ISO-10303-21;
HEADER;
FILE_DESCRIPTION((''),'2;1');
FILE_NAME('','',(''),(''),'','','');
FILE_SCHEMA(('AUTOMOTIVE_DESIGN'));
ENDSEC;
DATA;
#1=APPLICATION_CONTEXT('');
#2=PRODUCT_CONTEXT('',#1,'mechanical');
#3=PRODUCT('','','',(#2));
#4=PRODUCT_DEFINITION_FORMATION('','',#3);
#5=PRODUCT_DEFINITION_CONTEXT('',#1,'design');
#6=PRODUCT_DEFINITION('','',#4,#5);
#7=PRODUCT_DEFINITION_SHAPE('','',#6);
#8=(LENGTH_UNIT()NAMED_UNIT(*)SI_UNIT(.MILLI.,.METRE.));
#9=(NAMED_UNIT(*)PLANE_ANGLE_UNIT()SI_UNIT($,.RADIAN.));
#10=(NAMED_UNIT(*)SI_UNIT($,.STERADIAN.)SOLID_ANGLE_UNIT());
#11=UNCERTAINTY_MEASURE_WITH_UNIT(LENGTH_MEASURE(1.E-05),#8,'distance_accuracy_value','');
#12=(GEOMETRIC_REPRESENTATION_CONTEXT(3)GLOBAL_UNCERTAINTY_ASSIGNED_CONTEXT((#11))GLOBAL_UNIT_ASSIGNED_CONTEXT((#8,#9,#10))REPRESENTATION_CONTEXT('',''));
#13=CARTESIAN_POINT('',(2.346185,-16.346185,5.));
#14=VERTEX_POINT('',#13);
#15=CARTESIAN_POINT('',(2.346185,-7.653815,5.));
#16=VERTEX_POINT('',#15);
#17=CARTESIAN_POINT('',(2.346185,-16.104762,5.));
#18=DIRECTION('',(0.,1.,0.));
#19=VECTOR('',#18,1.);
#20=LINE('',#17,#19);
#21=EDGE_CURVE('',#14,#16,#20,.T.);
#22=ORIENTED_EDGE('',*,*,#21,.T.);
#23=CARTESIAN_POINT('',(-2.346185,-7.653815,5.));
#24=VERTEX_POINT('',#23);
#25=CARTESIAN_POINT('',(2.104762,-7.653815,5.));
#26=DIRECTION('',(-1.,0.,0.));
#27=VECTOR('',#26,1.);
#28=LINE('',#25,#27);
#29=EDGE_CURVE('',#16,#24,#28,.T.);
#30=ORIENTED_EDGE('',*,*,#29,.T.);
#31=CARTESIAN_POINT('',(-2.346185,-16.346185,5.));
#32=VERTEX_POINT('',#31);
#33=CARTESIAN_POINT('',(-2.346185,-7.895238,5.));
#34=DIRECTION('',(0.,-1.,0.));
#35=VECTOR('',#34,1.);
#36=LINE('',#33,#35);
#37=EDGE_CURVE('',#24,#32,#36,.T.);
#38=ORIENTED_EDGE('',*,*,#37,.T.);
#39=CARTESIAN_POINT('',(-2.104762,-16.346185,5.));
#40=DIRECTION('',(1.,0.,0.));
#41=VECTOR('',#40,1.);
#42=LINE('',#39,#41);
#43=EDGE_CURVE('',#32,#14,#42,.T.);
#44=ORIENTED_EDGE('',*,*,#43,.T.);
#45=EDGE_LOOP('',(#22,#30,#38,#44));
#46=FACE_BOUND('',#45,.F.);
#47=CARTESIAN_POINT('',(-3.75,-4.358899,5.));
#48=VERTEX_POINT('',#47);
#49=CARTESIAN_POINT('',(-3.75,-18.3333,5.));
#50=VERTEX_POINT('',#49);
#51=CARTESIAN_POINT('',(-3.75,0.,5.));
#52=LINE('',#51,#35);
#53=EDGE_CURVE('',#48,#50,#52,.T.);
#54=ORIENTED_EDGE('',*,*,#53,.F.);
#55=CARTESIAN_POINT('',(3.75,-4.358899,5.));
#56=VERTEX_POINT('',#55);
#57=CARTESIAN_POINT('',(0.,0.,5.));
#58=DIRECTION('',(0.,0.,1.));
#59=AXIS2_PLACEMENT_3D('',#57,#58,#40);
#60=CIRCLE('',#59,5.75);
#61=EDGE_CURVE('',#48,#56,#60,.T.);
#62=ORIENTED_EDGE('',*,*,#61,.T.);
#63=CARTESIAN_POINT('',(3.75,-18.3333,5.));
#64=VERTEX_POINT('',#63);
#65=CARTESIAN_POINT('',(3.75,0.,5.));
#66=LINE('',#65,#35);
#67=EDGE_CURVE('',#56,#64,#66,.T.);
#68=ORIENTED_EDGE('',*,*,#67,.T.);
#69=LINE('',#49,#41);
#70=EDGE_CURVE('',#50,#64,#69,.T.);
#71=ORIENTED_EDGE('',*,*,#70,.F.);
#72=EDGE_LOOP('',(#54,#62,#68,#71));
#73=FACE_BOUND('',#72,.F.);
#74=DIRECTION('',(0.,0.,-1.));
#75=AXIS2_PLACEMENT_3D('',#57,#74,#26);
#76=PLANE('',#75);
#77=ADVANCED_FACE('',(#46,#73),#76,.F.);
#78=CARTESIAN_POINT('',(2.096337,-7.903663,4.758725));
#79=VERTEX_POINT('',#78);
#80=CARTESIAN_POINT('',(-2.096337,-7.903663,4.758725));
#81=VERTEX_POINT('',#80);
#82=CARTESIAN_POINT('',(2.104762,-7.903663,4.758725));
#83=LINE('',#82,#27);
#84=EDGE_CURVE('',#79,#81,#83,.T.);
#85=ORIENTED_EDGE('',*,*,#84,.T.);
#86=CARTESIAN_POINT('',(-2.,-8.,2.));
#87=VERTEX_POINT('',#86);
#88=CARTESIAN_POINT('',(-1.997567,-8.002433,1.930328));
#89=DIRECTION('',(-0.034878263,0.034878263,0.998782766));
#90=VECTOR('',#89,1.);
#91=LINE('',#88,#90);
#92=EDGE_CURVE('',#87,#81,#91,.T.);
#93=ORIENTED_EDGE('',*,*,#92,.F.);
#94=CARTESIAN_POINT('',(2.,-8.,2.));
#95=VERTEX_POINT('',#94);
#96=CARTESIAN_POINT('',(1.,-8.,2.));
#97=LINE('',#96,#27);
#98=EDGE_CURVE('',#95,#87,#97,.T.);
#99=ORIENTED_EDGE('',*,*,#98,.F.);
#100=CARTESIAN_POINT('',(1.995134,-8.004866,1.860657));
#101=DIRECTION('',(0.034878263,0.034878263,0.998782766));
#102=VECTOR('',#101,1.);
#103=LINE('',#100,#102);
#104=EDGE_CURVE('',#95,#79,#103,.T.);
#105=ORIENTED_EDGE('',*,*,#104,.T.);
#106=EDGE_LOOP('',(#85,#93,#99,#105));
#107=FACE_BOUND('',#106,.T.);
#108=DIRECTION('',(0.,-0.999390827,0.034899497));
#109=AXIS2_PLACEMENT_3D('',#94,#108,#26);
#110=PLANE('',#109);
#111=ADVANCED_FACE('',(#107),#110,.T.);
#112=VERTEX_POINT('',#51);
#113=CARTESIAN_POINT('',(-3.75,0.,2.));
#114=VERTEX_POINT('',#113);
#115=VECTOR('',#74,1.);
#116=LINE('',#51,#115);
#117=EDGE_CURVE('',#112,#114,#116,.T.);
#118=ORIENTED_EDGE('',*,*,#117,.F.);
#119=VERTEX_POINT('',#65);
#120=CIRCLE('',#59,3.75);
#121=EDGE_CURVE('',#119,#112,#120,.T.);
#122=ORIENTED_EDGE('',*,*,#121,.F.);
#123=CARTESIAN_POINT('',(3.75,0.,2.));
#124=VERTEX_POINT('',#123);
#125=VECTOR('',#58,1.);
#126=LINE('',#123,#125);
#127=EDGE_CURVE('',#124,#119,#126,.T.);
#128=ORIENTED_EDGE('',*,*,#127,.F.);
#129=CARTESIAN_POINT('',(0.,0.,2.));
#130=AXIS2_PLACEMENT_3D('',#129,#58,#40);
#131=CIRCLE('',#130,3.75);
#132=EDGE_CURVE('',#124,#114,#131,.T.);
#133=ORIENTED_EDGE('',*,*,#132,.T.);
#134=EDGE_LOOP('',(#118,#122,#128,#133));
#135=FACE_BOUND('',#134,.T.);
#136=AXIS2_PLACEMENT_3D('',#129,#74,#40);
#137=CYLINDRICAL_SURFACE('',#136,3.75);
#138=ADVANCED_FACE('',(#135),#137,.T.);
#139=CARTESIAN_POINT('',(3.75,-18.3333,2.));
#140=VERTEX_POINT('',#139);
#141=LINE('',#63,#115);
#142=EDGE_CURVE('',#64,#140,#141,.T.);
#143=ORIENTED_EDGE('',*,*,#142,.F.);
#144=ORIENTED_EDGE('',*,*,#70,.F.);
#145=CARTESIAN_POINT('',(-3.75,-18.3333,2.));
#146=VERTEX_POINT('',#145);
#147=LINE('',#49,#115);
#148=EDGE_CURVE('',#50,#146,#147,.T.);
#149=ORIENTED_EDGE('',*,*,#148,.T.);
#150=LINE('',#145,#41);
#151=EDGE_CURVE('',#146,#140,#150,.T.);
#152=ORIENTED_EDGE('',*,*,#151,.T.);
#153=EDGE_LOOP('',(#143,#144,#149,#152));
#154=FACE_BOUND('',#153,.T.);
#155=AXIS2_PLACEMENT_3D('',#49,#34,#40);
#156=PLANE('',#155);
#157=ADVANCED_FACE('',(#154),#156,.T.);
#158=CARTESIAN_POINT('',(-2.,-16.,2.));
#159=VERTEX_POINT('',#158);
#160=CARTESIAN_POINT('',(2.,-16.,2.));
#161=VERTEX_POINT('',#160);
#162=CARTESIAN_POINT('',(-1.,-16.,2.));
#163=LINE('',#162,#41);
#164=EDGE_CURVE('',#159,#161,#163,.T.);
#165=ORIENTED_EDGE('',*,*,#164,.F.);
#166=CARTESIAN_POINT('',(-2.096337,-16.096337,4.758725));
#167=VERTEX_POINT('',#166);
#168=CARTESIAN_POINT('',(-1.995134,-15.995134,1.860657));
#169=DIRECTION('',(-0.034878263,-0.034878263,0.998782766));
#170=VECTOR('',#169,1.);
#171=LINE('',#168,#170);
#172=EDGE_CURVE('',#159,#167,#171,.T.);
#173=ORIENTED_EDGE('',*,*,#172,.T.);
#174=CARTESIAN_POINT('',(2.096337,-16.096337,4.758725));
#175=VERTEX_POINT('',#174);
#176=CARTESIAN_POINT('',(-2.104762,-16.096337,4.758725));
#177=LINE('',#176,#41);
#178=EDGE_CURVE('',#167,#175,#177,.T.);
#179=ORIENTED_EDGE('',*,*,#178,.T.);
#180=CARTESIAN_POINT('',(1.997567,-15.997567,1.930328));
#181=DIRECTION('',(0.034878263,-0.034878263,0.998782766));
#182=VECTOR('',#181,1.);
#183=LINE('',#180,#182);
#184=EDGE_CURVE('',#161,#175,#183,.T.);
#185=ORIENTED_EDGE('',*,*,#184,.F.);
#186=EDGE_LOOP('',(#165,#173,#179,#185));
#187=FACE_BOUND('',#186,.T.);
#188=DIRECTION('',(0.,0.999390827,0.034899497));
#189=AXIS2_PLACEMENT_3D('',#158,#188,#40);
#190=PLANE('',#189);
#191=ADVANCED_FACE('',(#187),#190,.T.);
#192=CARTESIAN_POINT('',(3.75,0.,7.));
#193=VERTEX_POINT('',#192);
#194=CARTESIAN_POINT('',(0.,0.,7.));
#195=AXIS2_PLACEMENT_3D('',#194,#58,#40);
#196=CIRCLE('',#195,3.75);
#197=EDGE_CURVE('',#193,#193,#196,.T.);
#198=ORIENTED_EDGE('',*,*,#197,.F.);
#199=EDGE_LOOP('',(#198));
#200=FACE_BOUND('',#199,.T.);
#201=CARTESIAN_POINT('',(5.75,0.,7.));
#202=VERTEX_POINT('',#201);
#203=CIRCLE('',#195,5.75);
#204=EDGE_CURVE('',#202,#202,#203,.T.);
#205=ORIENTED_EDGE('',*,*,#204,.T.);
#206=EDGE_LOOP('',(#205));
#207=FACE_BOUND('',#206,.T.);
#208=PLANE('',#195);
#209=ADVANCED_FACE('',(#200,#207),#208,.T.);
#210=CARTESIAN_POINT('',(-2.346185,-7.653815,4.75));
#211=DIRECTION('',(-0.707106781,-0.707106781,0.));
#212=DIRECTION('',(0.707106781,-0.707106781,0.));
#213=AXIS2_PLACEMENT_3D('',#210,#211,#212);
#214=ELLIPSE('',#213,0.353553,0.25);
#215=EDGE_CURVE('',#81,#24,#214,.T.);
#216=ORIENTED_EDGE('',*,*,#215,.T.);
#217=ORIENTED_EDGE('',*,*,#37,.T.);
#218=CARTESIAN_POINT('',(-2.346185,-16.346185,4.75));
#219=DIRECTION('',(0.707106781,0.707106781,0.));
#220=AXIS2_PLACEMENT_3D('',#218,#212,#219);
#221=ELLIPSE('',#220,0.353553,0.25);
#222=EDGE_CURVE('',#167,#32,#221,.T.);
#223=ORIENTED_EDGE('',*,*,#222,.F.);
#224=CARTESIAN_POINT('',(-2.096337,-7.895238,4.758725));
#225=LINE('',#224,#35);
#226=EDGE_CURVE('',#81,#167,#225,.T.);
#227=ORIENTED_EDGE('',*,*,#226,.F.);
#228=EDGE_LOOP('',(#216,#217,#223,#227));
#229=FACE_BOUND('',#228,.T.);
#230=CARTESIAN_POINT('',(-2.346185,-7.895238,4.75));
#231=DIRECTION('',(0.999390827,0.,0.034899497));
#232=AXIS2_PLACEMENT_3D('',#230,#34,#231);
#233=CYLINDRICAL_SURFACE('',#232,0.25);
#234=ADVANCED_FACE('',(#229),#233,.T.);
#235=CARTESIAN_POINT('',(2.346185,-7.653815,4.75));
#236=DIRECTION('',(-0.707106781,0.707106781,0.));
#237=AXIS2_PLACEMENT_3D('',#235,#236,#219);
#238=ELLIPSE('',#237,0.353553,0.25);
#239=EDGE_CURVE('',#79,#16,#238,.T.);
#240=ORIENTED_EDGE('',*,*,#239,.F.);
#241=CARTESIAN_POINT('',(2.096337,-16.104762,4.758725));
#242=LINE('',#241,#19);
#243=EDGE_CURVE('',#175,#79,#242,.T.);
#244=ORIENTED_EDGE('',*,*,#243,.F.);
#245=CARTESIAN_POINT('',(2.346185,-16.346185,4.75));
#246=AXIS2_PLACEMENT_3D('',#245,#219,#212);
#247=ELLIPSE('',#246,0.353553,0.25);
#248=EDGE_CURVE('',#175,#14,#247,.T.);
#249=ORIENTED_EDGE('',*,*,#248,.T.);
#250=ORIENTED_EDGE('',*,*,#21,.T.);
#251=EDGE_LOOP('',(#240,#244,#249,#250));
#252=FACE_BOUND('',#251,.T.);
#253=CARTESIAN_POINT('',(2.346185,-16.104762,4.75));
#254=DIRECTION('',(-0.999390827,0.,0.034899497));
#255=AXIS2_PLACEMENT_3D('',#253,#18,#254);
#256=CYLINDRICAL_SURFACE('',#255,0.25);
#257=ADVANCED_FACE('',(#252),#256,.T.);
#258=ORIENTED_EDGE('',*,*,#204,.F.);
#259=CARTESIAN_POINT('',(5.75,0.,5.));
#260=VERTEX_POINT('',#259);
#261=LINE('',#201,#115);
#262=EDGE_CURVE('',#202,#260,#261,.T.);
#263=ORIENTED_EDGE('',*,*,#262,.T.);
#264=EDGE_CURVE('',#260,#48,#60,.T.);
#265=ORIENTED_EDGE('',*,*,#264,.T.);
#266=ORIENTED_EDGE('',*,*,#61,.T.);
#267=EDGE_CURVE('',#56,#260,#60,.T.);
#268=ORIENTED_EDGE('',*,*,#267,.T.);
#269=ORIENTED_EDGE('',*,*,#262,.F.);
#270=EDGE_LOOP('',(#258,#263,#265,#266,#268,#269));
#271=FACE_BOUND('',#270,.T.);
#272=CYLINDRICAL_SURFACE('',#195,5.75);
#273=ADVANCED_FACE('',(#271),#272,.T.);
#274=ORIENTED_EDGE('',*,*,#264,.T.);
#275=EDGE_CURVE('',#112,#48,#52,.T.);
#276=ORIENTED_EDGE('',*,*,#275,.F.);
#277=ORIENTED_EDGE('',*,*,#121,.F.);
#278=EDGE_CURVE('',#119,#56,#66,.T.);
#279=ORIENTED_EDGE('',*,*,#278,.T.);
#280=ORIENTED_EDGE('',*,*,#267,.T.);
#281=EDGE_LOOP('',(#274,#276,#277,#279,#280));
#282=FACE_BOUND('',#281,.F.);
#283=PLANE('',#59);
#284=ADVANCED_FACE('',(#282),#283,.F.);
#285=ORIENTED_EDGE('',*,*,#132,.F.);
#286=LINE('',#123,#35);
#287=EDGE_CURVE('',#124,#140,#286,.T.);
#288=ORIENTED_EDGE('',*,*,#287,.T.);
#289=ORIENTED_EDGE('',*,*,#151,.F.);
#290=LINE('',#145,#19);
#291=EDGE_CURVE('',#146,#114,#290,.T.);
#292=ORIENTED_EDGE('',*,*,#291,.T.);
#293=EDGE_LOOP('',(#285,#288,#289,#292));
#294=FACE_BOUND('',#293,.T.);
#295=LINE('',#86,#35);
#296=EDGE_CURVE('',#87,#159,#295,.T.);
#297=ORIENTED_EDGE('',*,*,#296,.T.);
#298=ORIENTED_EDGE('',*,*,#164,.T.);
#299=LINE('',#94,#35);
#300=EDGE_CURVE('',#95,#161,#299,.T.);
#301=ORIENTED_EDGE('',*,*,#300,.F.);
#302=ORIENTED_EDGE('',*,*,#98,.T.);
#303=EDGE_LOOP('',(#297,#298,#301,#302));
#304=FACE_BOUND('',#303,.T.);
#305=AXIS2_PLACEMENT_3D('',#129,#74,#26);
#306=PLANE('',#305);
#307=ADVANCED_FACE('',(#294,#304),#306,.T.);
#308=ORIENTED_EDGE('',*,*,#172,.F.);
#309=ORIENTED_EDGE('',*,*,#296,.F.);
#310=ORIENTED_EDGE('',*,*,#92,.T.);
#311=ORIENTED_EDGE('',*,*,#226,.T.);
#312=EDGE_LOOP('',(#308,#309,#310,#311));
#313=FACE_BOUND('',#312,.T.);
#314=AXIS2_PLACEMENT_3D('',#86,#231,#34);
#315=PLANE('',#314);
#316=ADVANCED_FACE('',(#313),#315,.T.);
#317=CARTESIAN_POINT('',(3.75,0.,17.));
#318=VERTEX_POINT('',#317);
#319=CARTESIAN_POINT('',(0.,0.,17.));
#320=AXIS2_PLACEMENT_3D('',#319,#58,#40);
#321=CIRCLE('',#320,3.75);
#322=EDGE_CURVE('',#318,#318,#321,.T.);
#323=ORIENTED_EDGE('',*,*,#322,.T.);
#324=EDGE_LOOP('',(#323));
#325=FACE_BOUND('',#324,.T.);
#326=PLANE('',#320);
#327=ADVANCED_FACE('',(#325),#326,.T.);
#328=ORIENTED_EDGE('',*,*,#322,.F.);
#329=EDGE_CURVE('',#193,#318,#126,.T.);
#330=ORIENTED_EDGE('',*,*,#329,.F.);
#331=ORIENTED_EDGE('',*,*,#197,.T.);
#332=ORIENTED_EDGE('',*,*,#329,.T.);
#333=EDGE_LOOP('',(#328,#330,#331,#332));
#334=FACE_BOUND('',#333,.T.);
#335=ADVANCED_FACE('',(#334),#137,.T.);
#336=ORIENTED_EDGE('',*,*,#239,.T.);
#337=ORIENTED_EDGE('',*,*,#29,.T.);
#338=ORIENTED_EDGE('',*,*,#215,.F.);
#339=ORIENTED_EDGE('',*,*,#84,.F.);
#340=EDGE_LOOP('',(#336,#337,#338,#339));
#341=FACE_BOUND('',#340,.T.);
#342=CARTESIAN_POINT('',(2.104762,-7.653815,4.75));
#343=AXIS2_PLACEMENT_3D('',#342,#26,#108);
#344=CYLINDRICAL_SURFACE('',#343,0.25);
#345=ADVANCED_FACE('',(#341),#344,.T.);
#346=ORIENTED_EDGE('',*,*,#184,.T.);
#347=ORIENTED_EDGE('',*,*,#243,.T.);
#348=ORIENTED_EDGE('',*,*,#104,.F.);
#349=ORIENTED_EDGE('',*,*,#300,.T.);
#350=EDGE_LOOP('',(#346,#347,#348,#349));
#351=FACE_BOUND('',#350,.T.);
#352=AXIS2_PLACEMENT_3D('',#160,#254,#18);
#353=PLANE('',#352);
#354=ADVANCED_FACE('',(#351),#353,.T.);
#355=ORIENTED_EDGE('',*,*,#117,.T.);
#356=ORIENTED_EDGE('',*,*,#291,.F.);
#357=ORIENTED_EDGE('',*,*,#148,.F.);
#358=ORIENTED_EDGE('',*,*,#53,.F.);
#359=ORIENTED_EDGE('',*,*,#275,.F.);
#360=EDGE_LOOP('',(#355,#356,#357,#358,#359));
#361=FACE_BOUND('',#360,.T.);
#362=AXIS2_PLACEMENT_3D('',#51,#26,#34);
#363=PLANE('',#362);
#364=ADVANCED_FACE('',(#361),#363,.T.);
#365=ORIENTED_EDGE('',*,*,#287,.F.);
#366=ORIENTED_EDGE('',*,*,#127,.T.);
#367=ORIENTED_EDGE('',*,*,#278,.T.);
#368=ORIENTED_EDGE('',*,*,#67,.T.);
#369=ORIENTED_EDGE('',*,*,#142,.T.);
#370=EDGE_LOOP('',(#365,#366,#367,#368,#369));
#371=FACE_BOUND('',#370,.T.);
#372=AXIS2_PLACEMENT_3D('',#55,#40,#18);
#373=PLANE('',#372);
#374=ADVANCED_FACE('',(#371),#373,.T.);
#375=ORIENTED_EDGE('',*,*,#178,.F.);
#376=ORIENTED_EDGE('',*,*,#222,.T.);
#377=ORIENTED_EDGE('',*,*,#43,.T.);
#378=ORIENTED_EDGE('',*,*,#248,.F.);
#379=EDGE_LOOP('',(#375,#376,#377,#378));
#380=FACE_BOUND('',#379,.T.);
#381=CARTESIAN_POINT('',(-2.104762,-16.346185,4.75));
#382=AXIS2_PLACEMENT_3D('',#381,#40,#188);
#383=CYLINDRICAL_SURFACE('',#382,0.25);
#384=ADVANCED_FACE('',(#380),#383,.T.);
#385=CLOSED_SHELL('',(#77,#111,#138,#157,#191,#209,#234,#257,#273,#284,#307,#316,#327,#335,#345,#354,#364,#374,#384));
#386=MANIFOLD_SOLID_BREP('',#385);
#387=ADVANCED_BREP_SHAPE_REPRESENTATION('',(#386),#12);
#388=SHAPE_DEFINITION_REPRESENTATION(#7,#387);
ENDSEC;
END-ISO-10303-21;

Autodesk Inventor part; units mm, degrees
ref_plane "YZ Plane" through (0, 0, 0) normal (1, 0, 0) x (0, 1, 0)
sketch "Sketch1" plane through (0, 0, 0) normal (0, 0, 1) x (1, 0, 0)
  circle A0 centre (0, 0) radius 10
  dimension "d0" = 20
extrude "Extrusion1" add sketch "Sketch1" along normal blind 2
sketch "Sketch2" plane through (0, 0, 2) normal (0, 0, 1) x (1, 0, 0)
  circle A0 centre (0, 0) radius 3.75
  dimension "d3" = 7.5
extrude "Extrusion2" add sketch "Sketch2" along normal blind 15
ref_plane "Work Plane2" through (0, 0, 7) normal (0, 0, 1) x (1, 0, 0)
sketch "Sketch7" plane through (0, 0, 7) normal (0, 0, 1) x (1, 0, 0)
  circle A0 centre (0, 0) radius 3.75 projected
  circle A1 centre (0, 0) radius 5.75
  dimension "d27" = 2
extrude "Extrusion7" add sketch "Sketch7" against normal blind 2
sketch "Sketch8" plane through (0, 0, 5) normal (0, 0, -1) x (-1, 0, 0)
  circle A0 centre (0, 0) radius 5.75 projected
  circle A1 centre (0, 0) radius 3.75 projected
  circle A2 centre (0, 0) radius 5.75 construction
  line L0 (5.75, 0) -> (-5.75, 0) construction
  line L1 (-3.75, 0) -> (3.75, 0)
  line L2 (3.75, 0) -> (3.75, -18.3333)
  line L3 (3.75, -18.3333) -> (-3.75, -18.3333)
  line L4 (-3.75, -18.3333) -> (-3.75, 0)
  dimension "d31" = 18.3333
extrude "Extrusion8" add sketch "Sketch8" along normal blind 3 contours L4 A1 L2 A0 | A0 L2 L3 L4 picked at (2.8343, -4.1874)
sketch "Sketch9" plane through (0, 0, 2) normal (0, 0, -1) x (-1, 0, 0)
  arc A0 (-3.75, -4.3589) -> (3.75, -4.3589) centre (0, 0) ccw projected
  line L0 (3.75, -18.3333) -> (3.75, -4.3589) projected
  line L1 (-3.75, -18.3333) -> (3.75, -18.3333) projected
  line L2 (-3.75, -4.3589) -> (-3.75, -18.3333) projected
  line L3 (-2, -8) -> (2, -8)
  line L4 (2, -8) -> (2, -16)
  line L5 (2, -16) -> (-2, -16)
  line L6 (-2, -16) -> (-2, -8)
  dimension "d34" = 2
  dimension "d35" = 4
  dimension "d36" = 8
  dimension "d37" = 8
extrude "Extrusion9" cut sketch "Sketch9" against normal up to surface (3 mm away) draft 2 contours L3 L4 L5 L6
fillet "Fillet2" radius 0.25 4 edges at (0, -16.1048, 5) (2.1048, -12, 5) (-2.1048, -12, 5) (0, -7.8952, 5)
ref_plane "Work Plane3" through (0, 0, 2) normal (0, 0, -1) x (-1, 0, 0)
split "Split1" plane through (0, 0, 2) removes the side toward (0, 0, -1)
equation "\"d1\" = IG_gearThickness"
equation "\"d3\" = IG_shaftDiameter"
equation "\"d4\" = IG_shaftLength"
equation "\"Wheel_Related_W_\" = 0"
equation "\"W_innerDepth\" = 4"
equation "\"W_wallThickness\" = 2"
equation "\"W_holesClearance\" = 0.3"
equation "\"W_outerGearHoleDiameter\" = 5.3"
equation "\"W_innerGearHoleDiameter\" = 10.1"
equation "\"TempSpotReserved7\" = 0"
equation "\"TempSpotReserved8\" = 0"
equation "\"TempSpotReserved9\" = 0"
equation "\"TempSpotReserved10\" = 0"
equation "\"TempSpotReserved11\" = 0"
equation "\"TempSpotReserved12\" = 0"
equation "\"TempSpotReserved13\" = 0"
equation "\"TempSpotReserved14\" = 0"
equation "\"TempSpotReserved15\" = 0"
equation "\"TempSpotReserved16\" = 0"
equation "\"TempSpotReserved17\" = 0"
equation "\"TempSpotReserved18\" = 0"
equation "\"TempSpotReserved19\" = 0"
equation "\"TempSpotReserved20\" = 0"
equation "\"Inner_Gear_Related_IG_\" = 0"
equation "\"IG_shaftDiameter\" = 7.5"
equation "\"IG_shaftLength\" = 15"
equation "\"IG_gearThickness\" = 2"
equation "\"TempSpotReserved25\" = 0"
equation "\"TempSpotReserved26\" = 0"
equation "\"TempSpotReserved27\" = 0"
equation "\"TempSpotReserved28\" = 0"
equation "\"TempSpotReserved29\" = 0"
equation "\"TempSpotReserved30\" = 0"
equation "\"TempSpotReserved31\" = 0"
equation "\"TempSpotReserved32\" = 0"
equation "\"TempSpotReserved33\" = 0"
equation "\"TempSpotReserved34\" = 0"
equation "\"TempSpotReserved35\" = 0"
equation "\"TempSpotReserved36\" = 0"
equation "\"TempSpotReserved37\" = 0"
equation "\"TempSpotReserved38\" = 0"
equation "\"TempSpotReserved39\" = 0"
equation "\"TempSpotReserved40\" = 0"
equation "\"Outer_Gear_Related_OG_\" = 0"
equation "\"OG_distanceFromCenter\" = 23.33333"
equation "\"OG_shaftDiameter\" = 5"
equation "\"OG_gearDiameter\" = 26.66667"
equation "\"OG_shaftLength\" = 7"
equation "\"OG_gearThickness\" = 2"
equation "\"TempSpotReserved47\" = 0"
equation "\"TempSpotReserved48\" = 0"
equation "\"TempSpotReserved49\" = 0"
equation "\"TempSpotReserved50\" = 0"
equation "\"TempSpotReserved51\" = 0"
equation "\"TempSpotReserved52\" = 0"
equation "\"TempSpotReserved53\" = 0"
equation "\"TempSpotReserved54\" = 0"
equation "\"TempSpotReserved55\" = 0"
equation "\"TempSpotReserved56\" = 0"
equation "\"TempSpotReserved57\" = 0"
equation "\"TempSpotReserved58\" = 0"
equation "\"TempSpotReserved59\" = 0"
equation "\"TempSpotReserved60\" = 0"
equation "\"Leg_Extensions_Related_LE_\" = 0"
equation "\"LE_baseDiameter\" = 5"
equation "\"LE_maxLength\" = 24.6522"
equation "\"LE_thickness\" = 2.5"
equation "\"IG_ratioToOuterGear\" = 0.75"
equation "\"B_bearingThickness\" = 1"
equation "\"TempSpotReserved43\" = 0"
equation "\"TempSpotReserved45\" = 0"
equation "\"Thisisatest\" = 25.4"
equation "\"TempSpotReserved46\" = 0"
equation "\"TempSpotReserved44\" = 0"
equation "\"LE_offsetAboveOuterGear\" = 0"
equation "\"Bearing_Related_B_\" = 0"
equation "\"TempSpotReserved42\" = 0"
equation "\"OG_skirtOffset\" = 1"
equation "\"OG_skirtThickness\" = 1"
equation "\"IG_skirtThickness\" = 2"
equation "\"IG_extentionLength\" = 18.33333"
equation "\"IG_extentionThickness\" = 3"
equation "\"IG_slitWidth\" = 4"
equation "\"IG_slitlength\" = 8"
equation "\"IG_slitDistanceFromCenterHole\" = 8"
equation "\"IG_slitClearance\" = 0.2"
equation "\"Reserved_10\" = 0"
equation "\"Reserved_9\" = 0"
equation "\"Reserved_11\" = 0"
equation "\"Reserved_12\" = 0"
equation "\"Reserved_8\" = 0"
equation "\"Reserved_7\" = 0"
equation "\"Reserved_26\" = 0"
equation "\"Reserved_20\" = 0"
equation "\"Reserved_22\" = 0"
equation "\"Reserved_23\" = 0"
equation "\"Reserved_25\" = 0"
equation "\"Reserved_24\" = 0"
equation "\"Reserved_21\" = 0"
equation "\"Reserved_19\" = 0"
equation "\"Reserved_27\" = 0"
equation "\"Reserved_14\" = 0"
equation "\"Reserved_15\" = 0"
equation "\"Reserved_16\" = 0"
equation "\"Reserved_13\" = 0"
equation "\"Reserved_17\" = 0"
equation "\"Reserved_18\" = 0"
equation "\"Bearing_Related_BR_\" = 0"
equation "\"BR_bearingThickness\" = 1"
equation "\"Block_Related_BL_\" = 0"
equation "\"BL_width\" = 3.8"
equation "\"BL_length\" = 7.8"
equation "\"W_filletRadius\" = 0.25"
equation "\"W_extrutsionTaperAngle\" = 2deg"
equation "\"OG_protrudeDistance\" = 3"
properties part number "innerGear1"
